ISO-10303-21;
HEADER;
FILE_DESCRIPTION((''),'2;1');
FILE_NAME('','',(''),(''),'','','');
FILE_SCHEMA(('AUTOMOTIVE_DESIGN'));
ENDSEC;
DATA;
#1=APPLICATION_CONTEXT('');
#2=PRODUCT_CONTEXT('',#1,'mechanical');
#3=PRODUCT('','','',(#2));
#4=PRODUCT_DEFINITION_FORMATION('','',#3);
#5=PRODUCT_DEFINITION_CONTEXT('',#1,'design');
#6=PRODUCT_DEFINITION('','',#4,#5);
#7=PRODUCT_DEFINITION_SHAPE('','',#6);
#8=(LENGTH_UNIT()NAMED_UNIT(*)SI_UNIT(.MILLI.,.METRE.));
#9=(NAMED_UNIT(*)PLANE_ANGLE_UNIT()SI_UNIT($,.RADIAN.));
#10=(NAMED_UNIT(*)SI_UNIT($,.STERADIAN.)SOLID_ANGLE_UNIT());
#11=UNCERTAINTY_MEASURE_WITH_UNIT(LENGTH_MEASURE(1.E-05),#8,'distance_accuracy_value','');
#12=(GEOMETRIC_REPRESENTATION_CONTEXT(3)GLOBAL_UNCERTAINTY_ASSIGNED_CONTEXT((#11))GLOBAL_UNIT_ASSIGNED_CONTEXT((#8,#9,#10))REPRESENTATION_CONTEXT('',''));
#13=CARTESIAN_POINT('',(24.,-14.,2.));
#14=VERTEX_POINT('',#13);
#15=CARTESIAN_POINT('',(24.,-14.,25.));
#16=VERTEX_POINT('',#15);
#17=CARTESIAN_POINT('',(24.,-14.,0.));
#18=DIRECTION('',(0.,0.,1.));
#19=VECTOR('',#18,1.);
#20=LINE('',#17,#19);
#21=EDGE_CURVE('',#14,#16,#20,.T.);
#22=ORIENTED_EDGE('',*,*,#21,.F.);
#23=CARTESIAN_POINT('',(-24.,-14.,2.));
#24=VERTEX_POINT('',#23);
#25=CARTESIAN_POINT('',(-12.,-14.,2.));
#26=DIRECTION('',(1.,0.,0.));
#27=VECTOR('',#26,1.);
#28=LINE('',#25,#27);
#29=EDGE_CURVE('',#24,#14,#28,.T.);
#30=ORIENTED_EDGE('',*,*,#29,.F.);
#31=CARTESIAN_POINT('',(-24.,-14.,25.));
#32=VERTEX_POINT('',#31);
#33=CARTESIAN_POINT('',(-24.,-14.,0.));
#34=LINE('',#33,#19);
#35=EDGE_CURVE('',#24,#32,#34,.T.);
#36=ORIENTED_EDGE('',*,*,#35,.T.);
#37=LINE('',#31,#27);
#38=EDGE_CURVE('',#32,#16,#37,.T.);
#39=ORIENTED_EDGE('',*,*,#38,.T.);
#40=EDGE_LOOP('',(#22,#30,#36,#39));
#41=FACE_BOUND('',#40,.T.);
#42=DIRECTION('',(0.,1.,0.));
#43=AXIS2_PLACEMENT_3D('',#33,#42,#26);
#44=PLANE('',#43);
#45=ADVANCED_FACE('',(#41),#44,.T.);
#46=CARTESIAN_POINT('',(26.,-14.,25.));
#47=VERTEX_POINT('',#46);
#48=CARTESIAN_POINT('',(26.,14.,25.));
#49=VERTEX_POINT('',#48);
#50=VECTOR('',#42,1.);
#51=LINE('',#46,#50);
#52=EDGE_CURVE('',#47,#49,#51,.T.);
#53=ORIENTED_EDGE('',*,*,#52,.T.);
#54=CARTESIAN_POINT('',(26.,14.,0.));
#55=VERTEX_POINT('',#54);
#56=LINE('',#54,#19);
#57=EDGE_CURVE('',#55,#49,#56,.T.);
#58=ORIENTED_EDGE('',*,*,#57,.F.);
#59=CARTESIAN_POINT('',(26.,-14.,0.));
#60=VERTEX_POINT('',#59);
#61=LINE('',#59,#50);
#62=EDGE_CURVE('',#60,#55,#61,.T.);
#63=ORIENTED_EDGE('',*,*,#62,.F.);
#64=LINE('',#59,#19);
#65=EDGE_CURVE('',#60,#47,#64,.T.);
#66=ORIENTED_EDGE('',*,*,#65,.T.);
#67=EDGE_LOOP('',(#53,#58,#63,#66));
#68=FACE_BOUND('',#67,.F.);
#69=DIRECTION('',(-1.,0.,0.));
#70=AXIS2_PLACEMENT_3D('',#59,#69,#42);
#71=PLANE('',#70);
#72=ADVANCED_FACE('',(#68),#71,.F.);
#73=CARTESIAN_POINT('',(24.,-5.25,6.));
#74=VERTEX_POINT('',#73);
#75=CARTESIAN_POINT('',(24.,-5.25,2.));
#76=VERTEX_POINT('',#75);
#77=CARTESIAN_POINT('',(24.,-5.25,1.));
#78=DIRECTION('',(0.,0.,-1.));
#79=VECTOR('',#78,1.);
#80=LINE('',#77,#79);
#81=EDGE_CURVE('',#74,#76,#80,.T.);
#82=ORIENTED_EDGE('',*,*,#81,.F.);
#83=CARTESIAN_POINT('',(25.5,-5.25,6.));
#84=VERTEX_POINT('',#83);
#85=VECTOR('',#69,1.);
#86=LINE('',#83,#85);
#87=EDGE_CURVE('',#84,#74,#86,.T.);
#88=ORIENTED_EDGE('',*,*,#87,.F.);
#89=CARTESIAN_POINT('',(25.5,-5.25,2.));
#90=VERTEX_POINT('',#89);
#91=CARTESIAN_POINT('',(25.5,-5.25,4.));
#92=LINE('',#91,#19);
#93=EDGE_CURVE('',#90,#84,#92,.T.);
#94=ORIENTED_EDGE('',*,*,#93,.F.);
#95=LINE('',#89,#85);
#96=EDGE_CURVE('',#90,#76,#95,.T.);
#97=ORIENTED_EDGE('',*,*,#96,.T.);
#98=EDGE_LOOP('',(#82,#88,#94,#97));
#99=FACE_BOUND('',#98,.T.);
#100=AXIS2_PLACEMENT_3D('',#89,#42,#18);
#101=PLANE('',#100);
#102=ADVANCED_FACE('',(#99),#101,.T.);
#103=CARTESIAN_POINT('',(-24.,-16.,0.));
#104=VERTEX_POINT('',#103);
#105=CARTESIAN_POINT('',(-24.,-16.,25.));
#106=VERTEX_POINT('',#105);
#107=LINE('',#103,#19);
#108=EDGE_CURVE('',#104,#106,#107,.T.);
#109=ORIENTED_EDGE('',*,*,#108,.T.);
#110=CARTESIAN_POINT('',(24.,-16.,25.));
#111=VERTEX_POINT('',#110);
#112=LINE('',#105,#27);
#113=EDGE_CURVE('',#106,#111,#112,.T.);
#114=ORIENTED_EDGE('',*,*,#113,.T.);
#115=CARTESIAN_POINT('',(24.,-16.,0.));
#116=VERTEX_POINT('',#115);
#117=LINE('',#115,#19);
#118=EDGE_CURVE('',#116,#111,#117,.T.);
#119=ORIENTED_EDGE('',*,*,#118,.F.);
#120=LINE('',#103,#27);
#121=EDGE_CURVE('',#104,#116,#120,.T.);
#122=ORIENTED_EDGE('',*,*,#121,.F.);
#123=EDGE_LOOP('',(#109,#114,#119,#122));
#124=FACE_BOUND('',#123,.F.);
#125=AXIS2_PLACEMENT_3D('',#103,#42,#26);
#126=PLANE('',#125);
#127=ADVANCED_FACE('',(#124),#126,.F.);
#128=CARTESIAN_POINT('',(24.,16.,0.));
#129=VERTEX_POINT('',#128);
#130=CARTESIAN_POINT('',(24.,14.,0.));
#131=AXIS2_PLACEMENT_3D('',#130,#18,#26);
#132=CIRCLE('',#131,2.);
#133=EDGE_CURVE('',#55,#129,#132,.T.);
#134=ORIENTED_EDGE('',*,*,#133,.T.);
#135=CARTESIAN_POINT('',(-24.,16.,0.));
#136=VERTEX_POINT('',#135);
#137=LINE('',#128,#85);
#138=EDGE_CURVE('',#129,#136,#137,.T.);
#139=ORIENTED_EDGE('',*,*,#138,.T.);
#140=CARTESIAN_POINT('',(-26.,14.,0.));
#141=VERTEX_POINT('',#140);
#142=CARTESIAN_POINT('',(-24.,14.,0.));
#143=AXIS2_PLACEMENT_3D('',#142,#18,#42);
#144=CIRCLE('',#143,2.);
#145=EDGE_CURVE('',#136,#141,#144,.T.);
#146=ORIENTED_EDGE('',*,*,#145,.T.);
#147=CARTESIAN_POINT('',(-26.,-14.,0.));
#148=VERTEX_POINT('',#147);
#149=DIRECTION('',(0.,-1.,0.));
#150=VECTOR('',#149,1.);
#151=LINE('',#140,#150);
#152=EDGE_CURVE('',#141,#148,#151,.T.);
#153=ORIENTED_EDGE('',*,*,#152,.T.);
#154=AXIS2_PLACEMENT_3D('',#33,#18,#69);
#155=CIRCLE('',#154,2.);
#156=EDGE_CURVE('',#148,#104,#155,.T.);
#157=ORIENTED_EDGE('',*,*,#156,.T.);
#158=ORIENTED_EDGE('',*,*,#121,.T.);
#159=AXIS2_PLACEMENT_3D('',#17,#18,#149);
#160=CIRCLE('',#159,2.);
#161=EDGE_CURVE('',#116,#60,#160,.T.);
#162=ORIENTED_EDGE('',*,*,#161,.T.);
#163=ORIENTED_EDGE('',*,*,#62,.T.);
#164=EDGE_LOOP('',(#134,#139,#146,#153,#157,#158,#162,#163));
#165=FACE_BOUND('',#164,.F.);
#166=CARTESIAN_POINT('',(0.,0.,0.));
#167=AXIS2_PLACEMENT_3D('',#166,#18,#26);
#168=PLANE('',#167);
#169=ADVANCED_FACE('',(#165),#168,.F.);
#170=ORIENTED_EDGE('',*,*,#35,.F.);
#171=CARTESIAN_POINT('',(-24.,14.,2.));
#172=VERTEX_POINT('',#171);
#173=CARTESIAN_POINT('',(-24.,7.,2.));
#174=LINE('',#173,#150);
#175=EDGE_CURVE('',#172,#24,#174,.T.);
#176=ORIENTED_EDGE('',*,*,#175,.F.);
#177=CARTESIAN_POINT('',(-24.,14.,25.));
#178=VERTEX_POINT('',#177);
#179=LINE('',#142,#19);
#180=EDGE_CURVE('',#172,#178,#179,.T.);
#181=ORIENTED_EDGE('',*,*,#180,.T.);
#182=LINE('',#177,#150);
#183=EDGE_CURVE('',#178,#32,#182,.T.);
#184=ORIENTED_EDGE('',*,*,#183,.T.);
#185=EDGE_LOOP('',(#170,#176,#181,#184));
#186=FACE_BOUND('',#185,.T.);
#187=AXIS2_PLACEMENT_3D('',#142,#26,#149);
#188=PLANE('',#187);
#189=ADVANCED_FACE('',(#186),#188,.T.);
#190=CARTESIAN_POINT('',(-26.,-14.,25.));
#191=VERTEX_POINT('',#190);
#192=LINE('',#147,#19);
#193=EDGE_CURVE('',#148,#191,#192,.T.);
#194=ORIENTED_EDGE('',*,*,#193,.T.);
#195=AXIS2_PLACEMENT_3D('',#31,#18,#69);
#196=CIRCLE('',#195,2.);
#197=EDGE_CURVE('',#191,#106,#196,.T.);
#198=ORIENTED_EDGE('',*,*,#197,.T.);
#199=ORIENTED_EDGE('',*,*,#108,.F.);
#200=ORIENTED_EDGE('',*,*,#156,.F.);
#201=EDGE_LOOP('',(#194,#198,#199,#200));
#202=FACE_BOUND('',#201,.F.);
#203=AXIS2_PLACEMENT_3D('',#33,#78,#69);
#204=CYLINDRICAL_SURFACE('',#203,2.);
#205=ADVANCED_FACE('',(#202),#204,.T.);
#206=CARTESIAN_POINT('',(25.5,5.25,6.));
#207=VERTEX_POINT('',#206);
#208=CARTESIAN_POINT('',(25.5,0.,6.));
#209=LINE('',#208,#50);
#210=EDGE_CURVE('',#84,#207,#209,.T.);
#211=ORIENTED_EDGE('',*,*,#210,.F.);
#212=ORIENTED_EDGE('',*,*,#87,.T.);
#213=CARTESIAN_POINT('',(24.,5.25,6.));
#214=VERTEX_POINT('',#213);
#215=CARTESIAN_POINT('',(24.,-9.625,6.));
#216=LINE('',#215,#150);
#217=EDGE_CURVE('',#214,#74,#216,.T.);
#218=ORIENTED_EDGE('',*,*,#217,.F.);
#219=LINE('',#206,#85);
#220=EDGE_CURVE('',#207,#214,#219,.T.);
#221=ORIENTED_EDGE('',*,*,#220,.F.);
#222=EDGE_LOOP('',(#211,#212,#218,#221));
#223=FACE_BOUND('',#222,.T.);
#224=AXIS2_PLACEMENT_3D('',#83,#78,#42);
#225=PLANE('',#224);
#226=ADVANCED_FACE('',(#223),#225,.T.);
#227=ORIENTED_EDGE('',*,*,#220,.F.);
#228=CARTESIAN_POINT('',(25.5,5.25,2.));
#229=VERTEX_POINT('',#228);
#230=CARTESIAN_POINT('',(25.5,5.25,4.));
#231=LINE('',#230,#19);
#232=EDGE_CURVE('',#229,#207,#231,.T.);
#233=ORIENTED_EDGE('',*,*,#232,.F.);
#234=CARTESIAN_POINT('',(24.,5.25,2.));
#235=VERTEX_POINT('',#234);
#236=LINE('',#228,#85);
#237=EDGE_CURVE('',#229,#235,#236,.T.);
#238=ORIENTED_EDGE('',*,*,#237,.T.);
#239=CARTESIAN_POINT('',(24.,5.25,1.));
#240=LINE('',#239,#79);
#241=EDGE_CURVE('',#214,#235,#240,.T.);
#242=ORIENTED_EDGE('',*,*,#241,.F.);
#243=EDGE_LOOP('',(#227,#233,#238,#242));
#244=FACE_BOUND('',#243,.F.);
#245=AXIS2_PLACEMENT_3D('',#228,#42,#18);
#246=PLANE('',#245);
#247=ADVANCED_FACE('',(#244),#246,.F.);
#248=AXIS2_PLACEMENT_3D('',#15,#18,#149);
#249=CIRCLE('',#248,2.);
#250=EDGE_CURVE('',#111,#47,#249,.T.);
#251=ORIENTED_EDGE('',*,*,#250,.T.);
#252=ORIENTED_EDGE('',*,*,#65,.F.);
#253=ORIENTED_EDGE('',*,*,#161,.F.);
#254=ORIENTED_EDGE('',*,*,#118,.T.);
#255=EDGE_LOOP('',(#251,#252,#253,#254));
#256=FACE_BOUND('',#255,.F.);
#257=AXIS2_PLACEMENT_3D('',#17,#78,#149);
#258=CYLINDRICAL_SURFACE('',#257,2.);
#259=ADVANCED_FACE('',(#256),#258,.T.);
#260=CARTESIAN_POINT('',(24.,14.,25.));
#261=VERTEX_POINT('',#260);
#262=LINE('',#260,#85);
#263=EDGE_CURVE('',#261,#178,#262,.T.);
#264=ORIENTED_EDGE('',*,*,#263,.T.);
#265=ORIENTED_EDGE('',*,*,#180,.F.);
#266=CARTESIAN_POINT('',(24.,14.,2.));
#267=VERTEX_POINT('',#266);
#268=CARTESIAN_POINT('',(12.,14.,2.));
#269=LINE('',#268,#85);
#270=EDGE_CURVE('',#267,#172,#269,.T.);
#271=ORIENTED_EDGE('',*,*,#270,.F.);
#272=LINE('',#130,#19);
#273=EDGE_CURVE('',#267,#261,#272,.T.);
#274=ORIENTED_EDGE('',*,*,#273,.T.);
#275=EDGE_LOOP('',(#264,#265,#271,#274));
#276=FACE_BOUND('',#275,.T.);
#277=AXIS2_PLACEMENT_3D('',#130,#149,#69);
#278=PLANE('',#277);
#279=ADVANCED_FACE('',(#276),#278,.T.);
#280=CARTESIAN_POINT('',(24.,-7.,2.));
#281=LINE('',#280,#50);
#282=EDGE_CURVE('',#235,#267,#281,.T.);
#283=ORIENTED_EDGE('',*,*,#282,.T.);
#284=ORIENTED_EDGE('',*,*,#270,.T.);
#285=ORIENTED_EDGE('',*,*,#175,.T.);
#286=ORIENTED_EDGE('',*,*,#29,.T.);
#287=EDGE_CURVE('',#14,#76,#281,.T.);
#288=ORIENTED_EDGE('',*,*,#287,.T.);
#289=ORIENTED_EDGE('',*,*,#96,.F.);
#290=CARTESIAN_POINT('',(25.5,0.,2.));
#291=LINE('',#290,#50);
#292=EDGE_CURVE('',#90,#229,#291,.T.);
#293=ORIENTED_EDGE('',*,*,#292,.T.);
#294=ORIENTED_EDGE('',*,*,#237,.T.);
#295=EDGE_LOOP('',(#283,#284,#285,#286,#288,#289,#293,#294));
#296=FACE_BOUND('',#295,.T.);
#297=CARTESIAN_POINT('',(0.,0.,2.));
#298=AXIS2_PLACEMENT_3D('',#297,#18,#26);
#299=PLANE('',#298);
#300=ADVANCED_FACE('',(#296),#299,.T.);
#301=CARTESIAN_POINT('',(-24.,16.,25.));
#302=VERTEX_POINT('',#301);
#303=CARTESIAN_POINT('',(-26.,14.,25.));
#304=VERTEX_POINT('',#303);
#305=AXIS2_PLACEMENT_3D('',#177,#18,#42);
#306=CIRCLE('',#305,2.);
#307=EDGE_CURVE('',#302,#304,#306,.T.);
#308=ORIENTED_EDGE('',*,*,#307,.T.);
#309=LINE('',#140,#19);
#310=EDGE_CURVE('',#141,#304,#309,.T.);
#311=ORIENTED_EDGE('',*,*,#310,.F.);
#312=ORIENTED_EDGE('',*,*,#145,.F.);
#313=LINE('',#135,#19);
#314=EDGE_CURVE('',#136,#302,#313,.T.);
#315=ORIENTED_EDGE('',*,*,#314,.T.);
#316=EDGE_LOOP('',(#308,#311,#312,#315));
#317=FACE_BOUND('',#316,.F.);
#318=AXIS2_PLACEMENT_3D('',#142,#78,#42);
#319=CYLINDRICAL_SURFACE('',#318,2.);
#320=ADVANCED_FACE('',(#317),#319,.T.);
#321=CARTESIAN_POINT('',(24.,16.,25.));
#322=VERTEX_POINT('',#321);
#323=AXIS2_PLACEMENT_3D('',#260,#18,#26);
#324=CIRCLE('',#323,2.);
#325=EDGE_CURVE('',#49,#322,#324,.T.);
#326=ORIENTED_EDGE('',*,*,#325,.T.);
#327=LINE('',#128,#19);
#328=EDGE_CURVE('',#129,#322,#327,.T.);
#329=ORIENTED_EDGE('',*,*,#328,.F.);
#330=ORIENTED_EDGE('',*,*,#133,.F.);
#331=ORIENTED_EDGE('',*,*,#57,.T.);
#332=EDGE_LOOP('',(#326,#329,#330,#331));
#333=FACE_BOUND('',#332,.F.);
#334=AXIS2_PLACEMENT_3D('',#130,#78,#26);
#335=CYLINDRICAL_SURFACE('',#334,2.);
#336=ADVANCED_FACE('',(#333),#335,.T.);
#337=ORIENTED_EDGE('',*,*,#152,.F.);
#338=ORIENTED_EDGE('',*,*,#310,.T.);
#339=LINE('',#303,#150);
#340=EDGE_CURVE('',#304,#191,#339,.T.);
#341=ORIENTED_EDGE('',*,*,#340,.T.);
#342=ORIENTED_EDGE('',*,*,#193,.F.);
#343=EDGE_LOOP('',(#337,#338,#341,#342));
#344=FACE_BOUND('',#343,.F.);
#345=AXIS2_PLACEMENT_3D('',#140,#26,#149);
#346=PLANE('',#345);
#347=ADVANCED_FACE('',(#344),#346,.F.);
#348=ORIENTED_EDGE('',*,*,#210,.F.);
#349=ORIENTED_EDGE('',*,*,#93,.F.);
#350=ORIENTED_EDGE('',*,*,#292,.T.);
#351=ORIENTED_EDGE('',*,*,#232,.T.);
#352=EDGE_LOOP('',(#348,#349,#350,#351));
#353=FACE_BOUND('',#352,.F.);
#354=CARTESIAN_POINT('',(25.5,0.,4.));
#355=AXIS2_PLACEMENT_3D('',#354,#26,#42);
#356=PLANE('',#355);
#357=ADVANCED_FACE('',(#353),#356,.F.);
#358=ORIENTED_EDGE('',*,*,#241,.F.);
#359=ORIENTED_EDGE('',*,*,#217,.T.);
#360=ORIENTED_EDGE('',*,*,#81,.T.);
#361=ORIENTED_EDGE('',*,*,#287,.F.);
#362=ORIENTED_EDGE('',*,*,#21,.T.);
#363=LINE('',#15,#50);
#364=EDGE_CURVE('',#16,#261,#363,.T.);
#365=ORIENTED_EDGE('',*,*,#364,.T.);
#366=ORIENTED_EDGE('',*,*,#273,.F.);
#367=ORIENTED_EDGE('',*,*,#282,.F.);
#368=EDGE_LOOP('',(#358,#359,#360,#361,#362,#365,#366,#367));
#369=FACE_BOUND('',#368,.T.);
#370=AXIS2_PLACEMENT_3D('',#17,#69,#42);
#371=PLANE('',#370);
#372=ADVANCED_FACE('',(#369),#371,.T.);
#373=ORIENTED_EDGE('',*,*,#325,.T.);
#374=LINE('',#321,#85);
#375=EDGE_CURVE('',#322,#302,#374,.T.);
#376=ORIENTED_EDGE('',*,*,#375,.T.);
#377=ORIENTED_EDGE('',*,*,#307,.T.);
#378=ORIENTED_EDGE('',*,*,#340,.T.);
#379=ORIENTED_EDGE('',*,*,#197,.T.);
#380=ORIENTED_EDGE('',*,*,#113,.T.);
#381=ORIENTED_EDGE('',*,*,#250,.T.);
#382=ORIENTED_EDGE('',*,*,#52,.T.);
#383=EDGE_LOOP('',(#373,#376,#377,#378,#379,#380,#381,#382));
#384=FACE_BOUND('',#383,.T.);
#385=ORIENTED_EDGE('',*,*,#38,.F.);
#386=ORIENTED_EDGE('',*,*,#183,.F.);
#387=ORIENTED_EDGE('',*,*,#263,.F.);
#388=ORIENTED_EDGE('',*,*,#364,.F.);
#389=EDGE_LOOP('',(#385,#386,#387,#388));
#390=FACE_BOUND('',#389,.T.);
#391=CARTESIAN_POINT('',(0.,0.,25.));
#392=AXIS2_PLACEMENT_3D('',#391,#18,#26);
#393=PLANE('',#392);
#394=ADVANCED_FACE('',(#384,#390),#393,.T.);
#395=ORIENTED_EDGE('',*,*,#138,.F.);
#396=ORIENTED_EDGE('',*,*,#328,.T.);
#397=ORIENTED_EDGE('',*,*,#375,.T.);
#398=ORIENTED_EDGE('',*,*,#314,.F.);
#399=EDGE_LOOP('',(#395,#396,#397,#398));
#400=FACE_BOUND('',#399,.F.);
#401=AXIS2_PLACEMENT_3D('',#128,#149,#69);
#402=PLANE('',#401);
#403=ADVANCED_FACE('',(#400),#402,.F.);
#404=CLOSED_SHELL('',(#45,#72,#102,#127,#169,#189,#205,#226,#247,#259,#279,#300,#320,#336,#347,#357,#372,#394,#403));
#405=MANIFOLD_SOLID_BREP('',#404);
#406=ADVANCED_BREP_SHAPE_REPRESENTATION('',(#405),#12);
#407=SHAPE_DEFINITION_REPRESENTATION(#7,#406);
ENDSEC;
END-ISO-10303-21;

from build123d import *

# Parameters (mm, degrees)
F1_DEPTH = 25
F2_T     = 2
F4_W     = 10.5
F4_H     = 4
F5_DEPTH = 3


# Not quite as in the source:
# - a shell that OpenCascade refuses in one call is made with other operations: the cavity is built on its own and cut out


with BuildPart() as f1:
    # F0 (on Top) → F1 (new body)
    with BuildSketch(Plane.XY):
        with BuildLine():
            Line((24, 16), (-24, 16))
            ThreePointArc((-24, 16), (-25.4142135624, 15.4142135624), (-26, 14))
            Line((-26, 14), (-26, -14))
            ThreePointArc((-26, -14), (-25.4142135624, -15.4142135624), (-24, -16))
            Line((-24, -16), (24, -16))
            ThreePointArc((24, -16), (25.4142135624, -15.4142135624), (26, -14))
            Line((26, -14), (26, 14))
            ThreePointArc((26, 14), (25.4142135624, 15.4142135624), (24, 16))
        make_face()
    extrude(amount=F1_DEPTH)

    # F2: shell of thickness 2, made by hand


with BuildPart() as f2_core1:
    # F2_t2: copy of F1
    add(f1.part)

    # the walls: a layer under each face that stays
    f2_faces = [f2_core1.faces().sort_by_distance(p)[0] for p in [
        (0, 16, 12.5),
        (-26, 0, 12.5),
        (0, -16, 12.5),
        (26, 0, 12.5),
        (0, 0, 0),
    ]]
    thicken(f2_faces, amount=-F2_T, mode=Mode.SUBTRACT)


with BuildPart() as f1_1:
    add(f1.part)

    # what is left inside the walls is the cavity
    f2_cavity = [f2_core1.part.solids().sort_by_distance(p)[0] for p in [
        (0, -4.666667, 2.02),
    ]]
    add(f2_cavity, mode=Mode.SUBTRACT)

    # F4 (on offset) → F5 (cut)
    with BuildSketch(Plane.YZ.offset(25.5)):
        with Locations((0, 4)):
            Rectangle(F4_W, F4_H)
    extrude(amount=-F5_DEPTH, mode=Mode.SUBTRACT)


solid = f1_1.part
